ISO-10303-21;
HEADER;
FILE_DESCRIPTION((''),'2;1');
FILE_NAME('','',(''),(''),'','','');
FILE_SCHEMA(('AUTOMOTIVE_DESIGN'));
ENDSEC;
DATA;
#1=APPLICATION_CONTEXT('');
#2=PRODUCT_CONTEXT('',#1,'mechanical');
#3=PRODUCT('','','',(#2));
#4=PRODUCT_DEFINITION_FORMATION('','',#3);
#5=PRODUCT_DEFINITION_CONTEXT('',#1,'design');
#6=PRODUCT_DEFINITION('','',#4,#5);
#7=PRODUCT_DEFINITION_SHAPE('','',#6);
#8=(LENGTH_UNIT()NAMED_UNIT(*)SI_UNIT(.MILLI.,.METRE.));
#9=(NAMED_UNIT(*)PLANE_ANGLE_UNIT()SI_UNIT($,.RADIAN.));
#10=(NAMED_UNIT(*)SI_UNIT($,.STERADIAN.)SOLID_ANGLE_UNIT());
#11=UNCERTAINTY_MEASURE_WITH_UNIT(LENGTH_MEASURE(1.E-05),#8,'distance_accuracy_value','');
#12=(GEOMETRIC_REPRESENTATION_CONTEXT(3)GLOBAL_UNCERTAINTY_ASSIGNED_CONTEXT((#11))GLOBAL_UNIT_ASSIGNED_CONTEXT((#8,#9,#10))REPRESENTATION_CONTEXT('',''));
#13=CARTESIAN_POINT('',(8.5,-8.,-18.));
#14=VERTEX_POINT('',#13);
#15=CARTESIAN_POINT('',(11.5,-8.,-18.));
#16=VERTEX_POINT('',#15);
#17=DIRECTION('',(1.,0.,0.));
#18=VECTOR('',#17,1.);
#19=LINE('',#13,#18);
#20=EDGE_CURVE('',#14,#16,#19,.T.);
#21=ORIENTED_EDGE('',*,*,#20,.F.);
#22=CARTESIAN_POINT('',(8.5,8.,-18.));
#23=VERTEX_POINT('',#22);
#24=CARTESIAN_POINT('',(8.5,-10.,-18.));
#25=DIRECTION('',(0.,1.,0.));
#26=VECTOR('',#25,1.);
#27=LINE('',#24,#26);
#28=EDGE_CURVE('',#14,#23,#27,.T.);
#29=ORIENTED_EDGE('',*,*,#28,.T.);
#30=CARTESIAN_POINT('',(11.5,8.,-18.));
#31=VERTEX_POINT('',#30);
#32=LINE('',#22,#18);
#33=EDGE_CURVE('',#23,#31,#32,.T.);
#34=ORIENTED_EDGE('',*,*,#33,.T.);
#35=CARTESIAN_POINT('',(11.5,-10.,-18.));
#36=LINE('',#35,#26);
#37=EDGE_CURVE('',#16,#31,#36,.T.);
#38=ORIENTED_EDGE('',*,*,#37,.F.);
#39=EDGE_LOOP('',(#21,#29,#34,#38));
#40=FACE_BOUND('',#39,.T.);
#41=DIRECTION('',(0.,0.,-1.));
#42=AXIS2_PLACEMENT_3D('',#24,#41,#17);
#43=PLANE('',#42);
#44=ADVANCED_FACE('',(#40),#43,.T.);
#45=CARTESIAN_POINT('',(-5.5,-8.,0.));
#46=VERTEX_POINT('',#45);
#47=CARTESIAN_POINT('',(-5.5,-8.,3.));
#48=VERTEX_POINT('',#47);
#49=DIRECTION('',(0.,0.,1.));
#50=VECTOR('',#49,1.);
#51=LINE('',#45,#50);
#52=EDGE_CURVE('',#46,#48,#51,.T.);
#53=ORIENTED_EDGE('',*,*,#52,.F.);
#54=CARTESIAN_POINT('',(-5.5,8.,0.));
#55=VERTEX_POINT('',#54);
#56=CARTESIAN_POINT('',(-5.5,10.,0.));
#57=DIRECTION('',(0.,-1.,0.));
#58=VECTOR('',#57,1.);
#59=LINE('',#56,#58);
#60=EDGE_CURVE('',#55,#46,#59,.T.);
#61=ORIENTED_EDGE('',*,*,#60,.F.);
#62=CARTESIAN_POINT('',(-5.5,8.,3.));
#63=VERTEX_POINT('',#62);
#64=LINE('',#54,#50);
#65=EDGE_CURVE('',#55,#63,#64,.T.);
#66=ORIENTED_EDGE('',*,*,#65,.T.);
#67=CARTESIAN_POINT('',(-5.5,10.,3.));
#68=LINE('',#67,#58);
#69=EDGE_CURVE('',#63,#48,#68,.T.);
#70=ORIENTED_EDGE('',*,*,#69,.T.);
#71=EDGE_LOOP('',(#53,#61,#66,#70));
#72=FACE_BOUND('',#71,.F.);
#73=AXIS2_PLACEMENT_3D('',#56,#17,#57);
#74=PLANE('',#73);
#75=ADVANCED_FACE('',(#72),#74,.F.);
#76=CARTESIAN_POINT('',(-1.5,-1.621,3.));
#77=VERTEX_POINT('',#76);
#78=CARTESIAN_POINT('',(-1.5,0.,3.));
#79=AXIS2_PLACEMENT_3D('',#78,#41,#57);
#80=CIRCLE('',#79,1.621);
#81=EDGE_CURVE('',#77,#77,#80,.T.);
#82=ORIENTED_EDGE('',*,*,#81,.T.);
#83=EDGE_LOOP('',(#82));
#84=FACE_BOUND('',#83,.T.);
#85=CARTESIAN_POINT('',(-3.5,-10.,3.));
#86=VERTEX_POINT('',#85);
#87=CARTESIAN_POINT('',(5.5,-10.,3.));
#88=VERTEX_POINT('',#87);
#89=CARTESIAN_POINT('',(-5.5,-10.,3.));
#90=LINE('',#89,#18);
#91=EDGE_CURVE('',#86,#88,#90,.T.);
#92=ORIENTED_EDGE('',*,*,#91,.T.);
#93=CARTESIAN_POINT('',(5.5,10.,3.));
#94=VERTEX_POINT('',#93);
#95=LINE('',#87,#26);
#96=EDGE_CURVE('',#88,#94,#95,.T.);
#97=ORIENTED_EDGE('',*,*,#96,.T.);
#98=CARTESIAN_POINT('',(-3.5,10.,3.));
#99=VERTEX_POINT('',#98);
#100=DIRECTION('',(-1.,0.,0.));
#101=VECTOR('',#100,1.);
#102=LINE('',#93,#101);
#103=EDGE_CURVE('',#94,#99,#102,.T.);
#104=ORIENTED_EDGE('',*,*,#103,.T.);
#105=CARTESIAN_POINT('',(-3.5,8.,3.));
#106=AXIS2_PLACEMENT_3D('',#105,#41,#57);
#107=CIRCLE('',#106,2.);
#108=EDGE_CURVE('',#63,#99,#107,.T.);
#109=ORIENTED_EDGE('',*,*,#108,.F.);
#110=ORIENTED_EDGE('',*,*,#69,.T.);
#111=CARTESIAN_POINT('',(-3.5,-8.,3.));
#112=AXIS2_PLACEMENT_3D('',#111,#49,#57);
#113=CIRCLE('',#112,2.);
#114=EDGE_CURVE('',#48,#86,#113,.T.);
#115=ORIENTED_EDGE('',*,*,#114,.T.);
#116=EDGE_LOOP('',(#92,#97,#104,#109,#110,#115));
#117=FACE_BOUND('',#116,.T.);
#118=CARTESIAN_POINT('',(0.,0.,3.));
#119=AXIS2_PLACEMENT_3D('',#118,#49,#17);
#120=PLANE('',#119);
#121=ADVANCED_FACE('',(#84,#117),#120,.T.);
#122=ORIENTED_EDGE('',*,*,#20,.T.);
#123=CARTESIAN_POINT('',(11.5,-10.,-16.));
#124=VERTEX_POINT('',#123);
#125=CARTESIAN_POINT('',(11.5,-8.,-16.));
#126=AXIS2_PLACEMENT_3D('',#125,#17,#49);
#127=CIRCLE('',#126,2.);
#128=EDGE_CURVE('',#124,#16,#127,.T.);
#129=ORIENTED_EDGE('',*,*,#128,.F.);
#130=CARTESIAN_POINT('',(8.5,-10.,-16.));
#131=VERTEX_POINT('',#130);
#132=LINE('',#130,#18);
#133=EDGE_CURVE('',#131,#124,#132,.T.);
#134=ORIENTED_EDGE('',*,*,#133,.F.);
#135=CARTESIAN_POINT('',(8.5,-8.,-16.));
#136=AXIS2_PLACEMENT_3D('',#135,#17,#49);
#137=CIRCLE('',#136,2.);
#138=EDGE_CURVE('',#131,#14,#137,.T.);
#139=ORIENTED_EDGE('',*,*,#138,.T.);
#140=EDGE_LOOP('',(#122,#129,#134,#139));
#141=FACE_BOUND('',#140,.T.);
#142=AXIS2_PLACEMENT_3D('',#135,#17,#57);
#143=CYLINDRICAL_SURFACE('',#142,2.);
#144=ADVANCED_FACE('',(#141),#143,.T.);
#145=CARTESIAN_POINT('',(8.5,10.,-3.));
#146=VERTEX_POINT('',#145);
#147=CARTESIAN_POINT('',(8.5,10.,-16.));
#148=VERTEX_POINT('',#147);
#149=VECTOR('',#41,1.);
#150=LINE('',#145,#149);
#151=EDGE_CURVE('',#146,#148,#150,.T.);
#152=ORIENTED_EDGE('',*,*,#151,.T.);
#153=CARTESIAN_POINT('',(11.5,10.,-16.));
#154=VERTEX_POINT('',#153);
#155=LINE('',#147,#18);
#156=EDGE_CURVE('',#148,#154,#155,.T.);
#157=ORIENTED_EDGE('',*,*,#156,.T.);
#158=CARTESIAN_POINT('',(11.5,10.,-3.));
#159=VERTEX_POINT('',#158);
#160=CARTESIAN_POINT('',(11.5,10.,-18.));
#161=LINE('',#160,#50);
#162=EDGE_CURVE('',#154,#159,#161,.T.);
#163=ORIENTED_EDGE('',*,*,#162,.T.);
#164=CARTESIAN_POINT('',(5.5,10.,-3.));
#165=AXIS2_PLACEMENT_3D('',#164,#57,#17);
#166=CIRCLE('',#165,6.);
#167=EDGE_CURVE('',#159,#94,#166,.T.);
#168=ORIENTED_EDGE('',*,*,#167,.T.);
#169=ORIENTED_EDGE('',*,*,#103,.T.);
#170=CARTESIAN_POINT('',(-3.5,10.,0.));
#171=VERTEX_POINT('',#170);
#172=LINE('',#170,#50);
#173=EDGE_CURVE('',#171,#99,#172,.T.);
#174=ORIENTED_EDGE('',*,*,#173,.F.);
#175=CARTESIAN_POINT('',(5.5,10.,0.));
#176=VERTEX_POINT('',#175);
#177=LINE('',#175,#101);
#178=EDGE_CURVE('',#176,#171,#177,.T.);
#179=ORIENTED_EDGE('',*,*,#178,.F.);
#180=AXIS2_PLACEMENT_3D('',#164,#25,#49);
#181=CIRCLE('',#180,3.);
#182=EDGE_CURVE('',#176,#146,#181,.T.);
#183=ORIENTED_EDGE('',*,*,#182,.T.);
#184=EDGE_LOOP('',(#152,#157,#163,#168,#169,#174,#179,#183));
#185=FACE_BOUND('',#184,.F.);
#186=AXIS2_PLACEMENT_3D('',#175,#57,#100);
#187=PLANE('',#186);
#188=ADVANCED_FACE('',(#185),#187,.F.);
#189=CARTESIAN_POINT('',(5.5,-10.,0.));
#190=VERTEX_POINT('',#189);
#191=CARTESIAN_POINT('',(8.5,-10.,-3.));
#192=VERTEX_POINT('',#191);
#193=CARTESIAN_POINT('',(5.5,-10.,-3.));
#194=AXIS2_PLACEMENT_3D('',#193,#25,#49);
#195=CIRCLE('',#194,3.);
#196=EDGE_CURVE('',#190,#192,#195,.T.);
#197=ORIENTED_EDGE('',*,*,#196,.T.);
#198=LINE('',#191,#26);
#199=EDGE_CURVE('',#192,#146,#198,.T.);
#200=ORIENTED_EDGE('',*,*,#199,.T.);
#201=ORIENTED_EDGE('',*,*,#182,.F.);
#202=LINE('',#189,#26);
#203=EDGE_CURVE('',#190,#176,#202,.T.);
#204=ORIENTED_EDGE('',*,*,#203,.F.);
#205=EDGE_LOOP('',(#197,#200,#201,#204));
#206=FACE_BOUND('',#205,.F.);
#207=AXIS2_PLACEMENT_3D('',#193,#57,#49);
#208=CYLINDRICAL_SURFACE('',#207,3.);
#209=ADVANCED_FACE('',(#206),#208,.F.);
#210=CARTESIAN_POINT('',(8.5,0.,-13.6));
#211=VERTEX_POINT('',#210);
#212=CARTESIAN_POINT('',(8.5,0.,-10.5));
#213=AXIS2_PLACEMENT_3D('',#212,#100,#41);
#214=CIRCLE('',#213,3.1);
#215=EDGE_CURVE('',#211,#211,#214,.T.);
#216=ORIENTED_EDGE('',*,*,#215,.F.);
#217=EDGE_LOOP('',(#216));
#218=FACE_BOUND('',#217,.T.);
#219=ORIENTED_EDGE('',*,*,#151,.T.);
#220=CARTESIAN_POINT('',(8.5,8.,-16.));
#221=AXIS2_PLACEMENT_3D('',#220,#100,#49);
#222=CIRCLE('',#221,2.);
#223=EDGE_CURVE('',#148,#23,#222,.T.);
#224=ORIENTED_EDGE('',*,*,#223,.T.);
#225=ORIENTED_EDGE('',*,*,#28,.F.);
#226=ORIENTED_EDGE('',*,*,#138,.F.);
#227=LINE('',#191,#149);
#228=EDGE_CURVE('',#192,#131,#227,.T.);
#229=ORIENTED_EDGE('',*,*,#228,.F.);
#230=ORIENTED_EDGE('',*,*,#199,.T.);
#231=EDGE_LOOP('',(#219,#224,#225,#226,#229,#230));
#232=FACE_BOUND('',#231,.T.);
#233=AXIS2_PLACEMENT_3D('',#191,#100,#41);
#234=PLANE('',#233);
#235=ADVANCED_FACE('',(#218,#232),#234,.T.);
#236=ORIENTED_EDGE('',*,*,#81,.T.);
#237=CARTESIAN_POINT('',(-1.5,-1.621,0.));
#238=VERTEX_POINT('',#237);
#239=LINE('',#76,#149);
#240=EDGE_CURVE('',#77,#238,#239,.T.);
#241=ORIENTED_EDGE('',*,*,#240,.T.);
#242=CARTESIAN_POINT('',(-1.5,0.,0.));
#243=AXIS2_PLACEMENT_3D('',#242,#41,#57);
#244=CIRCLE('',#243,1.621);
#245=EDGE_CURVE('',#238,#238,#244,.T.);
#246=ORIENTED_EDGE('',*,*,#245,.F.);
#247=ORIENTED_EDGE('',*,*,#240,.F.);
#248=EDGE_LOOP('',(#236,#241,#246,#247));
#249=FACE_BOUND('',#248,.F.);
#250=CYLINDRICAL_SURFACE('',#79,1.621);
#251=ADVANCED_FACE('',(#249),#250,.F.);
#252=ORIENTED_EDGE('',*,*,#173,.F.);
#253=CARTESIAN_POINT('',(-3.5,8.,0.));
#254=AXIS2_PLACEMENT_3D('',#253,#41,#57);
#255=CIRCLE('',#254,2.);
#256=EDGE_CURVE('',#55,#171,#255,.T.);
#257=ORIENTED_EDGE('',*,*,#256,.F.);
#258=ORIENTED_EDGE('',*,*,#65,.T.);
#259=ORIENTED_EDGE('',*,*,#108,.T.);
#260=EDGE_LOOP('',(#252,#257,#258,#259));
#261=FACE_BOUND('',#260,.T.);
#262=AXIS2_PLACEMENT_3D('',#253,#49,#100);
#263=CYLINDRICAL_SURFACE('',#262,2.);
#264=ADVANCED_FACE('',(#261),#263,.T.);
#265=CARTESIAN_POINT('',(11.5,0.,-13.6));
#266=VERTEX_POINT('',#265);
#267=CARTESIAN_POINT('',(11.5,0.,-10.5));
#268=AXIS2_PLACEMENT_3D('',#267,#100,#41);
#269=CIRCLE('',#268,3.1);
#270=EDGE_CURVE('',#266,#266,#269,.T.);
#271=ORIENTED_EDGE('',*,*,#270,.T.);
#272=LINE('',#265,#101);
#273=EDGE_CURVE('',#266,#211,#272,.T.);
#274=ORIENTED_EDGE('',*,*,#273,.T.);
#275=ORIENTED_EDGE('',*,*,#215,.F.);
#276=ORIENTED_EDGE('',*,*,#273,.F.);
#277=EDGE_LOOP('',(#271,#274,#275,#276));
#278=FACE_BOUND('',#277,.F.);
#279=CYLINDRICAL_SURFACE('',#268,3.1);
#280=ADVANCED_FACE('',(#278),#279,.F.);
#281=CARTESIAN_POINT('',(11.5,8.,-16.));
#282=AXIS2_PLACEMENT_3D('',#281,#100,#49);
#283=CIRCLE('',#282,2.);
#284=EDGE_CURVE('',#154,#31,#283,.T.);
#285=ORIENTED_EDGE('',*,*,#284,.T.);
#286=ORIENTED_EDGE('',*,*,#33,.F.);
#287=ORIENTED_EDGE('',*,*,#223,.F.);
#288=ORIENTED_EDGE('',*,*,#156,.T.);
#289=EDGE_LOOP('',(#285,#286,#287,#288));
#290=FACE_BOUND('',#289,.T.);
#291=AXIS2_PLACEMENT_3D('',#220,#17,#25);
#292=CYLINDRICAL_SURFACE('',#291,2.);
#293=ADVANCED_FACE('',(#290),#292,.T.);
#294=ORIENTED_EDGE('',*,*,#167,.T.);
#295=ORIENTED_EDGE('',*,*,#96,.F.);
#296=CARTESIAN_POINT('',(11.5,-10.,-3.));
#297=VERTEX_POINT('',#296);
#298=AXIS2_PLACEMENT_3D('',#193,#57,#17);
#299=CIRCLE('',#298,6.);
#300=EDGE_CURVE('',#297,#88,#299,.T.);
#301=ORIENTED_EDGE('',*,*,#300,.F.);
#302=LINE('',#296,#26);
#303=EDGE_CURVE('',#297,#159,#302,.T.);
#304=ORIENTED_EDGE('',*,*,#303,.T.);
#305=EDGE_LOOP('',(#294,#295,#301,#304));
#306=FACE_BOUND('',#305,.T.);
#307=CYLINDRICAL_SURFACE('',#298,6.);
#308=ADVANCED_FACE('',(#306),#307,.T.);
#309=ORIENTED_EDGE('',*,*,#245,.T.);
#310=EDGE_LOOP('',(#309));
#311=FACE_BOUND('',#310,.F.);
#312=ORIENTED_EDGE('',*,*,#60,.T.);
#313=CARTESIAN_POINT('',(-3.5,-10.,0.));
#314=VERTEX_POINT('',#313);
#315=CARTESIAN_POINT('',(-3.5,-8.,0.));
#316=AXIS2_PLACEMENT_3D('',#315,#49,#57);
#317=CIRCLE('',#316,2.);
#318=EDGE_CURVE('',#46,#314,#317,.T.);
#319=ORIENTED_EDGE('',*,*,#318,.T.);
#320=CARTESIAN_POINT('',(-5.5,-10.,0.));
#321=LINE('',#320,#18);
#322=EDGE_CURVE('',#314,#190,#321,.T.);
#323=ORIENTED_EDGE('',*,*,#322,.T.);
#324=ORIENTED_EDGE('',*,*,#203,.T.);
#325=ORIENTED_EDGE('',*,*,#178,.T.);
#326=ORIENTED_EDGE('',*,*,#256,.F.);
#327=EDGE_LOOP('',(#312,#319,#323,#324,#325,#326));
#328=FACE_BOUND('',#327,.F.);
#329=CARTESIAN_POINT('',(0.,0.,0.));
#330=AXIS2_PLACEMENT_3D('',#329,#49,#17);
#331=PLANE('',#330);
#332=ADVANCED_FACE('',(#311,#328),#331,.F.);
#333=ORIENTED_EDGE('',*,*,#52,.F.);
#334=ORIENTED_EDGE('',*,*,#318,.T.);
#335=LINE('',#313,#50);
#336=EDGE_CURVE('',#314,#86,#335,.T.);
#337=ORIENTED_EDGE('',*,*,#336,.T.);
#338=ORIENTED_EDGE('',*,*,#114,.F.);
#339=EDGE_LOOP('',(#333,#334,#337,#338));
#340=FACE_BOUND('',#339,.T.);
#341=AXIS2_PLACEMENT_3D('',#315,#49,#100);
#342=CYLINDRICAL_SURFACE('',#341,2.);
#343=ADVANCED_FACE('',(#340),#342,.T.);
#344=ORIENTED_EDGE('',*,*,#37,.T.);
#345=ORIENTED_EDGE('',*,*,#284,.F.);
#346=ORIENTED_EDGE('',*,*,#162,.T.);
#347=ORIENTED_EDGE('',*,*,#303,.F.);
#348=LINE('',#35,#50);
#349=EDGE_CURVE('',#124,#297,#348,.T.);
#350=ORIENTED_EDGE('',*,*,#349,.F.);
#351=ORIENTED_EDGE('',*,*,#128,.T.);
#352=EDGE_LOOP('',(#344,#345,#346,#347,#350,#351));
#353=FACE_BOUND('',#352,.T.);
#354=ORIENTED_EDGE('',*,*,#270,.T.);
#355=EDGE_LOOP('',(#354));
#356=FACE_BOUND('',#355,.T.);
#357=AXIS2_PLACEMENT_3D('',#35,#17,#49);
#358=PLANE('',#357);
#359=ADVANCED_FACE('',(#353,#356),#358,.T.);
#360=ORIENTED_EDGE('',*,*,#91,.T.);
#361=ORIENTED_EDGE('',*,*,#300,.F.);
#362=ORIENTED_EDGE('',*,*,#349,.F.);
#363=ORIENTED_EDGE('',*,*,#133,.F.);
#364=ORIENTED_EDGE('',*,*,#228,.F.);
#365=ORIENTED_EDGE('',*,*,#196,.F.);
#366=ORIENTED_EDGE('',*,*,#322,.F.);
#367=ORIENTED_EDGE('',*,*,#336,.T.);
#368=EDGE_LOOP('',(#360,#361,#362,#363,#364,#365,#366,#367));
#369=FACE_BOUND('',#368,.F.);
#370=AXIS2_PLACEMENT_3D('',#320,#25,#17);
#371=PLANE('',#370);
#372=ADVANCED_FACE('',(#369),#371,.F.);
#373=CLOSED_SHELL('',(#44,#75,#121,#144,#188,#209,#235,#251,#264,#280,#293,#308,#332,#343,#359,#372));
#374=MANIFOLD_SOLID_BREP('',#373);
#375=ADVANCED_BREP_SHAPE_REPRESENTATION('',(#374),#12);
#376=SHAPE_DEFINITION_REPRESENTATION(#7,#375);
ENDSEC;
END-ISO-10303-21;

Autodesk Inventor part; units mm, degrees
ref_plane "YZ Plane" through (0, 0, 0) normal (1, 0, 0) x (0, 1, 0)
ref_plane "XZ Plane" through (0, 0, 0) normal (0, 1, 0) x (-1, 0, 0)
ref_plane "XY Plane" through (0, 0, 0) normal (0, 0, 1) x (1, 0, 0)
sketch "スケッチ1" plane through (0, 0, 0) normal (0, 0, 1) x (1, 0, 0)
  line L0 (-5.5, -10) -> (5.5, -10)
  line L1 (5.5, -10) -> (5.5, 10)
  line L2 (5.5, 10) -> (-5.5, 10)
  line L3 (-5.5, 10) -> (-5.5, -10)
  line L4 (-5.5, -10) -> (5.5, 10) construction
  line L5 (5.5, -10) -> (-5.5, 10) construction
  point P0 (0, 0)
  dimension "d0" = 11
  dimension "d1" = 20
extrude "プレート1" add sketch "スケッチ1" along normal blind 3
sketch "スケッチ2" plane through (8.5, -10, -3) normal (1, 0, 0) x (0, 1, 0)
  line L0 (20, 0) -> (0, 0)
  line L1 (0, 0) -> (0, -15)
  line L2 (0, -15) -> (20, -15)
  line L3 (20, -15) -> (20, 0)
edge flange "フランジ1" height 21 angle 90 thickness 3 bend radius 3 thickness toward (1, 0, 0) relief tear relief width 3 relief depth 1.5 edges at (5.5, 0, 0) wall of the first edge with corners at (8.5, 10, -3) (8.5, -10, -3) (8.5, -10, -18) (8.5, 10, -18)
bend "曲げ1"
corner "コーナー1"
sketch "スケッチ3" plane through (0, 0, 3) normal (0, 0, 1) x (1, 0, 0)
  line L0 (-5.5, -10) -> (-5.5, 10) projected
  line L1 (5.5, -10) -> (-5.5, -10) projected
  line L2 (5.5, 10) -> (5.5, -10) projected
  line L3 (-5.5, 10) -> (5.5, 10) projected
  point P0 (-1.5, 0)
  dimension "d29" = 4
hole "穴1" at (-1.5, 0, 3) direction (0, 0, -1) diameter 3.242 end through all thread size "M4x0.7" class "6H" standard "ISO Metric profile"
sketch "スケッチ4" plane through (11.5, -10, -18) normal (1, 0, 0) x (0, 0, -1)
  line L0 (-15, 20) -> (-15, 0) projected
  line L1 (0, 0) -> (-15, 0) projected
  line L2 (0, 20) -> (0, 0) projected
  line L3 (-15, 20) -> (0, 20) projected
  point P0 (-18, 10)
  point P1 (-7.5, 10)
  dimension "d20" = 7.5
hole "穴2" at (11.5, 0, -10.5) direction (-1, 0, 0) diameter 6.2 end through all
fillet "フィレット1" radius 2 4 edges at (-5.5, 10, 1.5) (-5.5, -10, 1.5) (10, -10, -18) (10, 10, -18)
equation "\"d2\" = Thickness"
equation "\"d3\" = BendReliefWidth"
equation "\"d4\" = BendReliefDepth"
equation "\"d5\" = MinimumRemnant"
equation "\"d6\" = TransitionRadius"
equation "\"d9\" = BendRadius"
equation "\"d10\" = CornerReliefSize"
equation "\"d11\" = GapSize"
equation "\"d12\" = JacobiRadiusSize"
equation "\"BendRadius\" = Thickness"
equation "\"BendReliefWidth\" = Thickness"
equation "\"BendReliefDepth\" = 0.5 * Thickness"
equation "\"CornerReliefSize\" = 4 * Thickness"
equation "\"MinimumRemnant\" = 2 * Thickness"
equation "\"TransitionRadius\" = BendRadius"
equation "\"JacobiRadiusSize\" = BendRadius"
equation "\"GapSize\" = Thickness"
equation "\"Thickness\" = 3"
properties part number "Belt_Tenshon"
